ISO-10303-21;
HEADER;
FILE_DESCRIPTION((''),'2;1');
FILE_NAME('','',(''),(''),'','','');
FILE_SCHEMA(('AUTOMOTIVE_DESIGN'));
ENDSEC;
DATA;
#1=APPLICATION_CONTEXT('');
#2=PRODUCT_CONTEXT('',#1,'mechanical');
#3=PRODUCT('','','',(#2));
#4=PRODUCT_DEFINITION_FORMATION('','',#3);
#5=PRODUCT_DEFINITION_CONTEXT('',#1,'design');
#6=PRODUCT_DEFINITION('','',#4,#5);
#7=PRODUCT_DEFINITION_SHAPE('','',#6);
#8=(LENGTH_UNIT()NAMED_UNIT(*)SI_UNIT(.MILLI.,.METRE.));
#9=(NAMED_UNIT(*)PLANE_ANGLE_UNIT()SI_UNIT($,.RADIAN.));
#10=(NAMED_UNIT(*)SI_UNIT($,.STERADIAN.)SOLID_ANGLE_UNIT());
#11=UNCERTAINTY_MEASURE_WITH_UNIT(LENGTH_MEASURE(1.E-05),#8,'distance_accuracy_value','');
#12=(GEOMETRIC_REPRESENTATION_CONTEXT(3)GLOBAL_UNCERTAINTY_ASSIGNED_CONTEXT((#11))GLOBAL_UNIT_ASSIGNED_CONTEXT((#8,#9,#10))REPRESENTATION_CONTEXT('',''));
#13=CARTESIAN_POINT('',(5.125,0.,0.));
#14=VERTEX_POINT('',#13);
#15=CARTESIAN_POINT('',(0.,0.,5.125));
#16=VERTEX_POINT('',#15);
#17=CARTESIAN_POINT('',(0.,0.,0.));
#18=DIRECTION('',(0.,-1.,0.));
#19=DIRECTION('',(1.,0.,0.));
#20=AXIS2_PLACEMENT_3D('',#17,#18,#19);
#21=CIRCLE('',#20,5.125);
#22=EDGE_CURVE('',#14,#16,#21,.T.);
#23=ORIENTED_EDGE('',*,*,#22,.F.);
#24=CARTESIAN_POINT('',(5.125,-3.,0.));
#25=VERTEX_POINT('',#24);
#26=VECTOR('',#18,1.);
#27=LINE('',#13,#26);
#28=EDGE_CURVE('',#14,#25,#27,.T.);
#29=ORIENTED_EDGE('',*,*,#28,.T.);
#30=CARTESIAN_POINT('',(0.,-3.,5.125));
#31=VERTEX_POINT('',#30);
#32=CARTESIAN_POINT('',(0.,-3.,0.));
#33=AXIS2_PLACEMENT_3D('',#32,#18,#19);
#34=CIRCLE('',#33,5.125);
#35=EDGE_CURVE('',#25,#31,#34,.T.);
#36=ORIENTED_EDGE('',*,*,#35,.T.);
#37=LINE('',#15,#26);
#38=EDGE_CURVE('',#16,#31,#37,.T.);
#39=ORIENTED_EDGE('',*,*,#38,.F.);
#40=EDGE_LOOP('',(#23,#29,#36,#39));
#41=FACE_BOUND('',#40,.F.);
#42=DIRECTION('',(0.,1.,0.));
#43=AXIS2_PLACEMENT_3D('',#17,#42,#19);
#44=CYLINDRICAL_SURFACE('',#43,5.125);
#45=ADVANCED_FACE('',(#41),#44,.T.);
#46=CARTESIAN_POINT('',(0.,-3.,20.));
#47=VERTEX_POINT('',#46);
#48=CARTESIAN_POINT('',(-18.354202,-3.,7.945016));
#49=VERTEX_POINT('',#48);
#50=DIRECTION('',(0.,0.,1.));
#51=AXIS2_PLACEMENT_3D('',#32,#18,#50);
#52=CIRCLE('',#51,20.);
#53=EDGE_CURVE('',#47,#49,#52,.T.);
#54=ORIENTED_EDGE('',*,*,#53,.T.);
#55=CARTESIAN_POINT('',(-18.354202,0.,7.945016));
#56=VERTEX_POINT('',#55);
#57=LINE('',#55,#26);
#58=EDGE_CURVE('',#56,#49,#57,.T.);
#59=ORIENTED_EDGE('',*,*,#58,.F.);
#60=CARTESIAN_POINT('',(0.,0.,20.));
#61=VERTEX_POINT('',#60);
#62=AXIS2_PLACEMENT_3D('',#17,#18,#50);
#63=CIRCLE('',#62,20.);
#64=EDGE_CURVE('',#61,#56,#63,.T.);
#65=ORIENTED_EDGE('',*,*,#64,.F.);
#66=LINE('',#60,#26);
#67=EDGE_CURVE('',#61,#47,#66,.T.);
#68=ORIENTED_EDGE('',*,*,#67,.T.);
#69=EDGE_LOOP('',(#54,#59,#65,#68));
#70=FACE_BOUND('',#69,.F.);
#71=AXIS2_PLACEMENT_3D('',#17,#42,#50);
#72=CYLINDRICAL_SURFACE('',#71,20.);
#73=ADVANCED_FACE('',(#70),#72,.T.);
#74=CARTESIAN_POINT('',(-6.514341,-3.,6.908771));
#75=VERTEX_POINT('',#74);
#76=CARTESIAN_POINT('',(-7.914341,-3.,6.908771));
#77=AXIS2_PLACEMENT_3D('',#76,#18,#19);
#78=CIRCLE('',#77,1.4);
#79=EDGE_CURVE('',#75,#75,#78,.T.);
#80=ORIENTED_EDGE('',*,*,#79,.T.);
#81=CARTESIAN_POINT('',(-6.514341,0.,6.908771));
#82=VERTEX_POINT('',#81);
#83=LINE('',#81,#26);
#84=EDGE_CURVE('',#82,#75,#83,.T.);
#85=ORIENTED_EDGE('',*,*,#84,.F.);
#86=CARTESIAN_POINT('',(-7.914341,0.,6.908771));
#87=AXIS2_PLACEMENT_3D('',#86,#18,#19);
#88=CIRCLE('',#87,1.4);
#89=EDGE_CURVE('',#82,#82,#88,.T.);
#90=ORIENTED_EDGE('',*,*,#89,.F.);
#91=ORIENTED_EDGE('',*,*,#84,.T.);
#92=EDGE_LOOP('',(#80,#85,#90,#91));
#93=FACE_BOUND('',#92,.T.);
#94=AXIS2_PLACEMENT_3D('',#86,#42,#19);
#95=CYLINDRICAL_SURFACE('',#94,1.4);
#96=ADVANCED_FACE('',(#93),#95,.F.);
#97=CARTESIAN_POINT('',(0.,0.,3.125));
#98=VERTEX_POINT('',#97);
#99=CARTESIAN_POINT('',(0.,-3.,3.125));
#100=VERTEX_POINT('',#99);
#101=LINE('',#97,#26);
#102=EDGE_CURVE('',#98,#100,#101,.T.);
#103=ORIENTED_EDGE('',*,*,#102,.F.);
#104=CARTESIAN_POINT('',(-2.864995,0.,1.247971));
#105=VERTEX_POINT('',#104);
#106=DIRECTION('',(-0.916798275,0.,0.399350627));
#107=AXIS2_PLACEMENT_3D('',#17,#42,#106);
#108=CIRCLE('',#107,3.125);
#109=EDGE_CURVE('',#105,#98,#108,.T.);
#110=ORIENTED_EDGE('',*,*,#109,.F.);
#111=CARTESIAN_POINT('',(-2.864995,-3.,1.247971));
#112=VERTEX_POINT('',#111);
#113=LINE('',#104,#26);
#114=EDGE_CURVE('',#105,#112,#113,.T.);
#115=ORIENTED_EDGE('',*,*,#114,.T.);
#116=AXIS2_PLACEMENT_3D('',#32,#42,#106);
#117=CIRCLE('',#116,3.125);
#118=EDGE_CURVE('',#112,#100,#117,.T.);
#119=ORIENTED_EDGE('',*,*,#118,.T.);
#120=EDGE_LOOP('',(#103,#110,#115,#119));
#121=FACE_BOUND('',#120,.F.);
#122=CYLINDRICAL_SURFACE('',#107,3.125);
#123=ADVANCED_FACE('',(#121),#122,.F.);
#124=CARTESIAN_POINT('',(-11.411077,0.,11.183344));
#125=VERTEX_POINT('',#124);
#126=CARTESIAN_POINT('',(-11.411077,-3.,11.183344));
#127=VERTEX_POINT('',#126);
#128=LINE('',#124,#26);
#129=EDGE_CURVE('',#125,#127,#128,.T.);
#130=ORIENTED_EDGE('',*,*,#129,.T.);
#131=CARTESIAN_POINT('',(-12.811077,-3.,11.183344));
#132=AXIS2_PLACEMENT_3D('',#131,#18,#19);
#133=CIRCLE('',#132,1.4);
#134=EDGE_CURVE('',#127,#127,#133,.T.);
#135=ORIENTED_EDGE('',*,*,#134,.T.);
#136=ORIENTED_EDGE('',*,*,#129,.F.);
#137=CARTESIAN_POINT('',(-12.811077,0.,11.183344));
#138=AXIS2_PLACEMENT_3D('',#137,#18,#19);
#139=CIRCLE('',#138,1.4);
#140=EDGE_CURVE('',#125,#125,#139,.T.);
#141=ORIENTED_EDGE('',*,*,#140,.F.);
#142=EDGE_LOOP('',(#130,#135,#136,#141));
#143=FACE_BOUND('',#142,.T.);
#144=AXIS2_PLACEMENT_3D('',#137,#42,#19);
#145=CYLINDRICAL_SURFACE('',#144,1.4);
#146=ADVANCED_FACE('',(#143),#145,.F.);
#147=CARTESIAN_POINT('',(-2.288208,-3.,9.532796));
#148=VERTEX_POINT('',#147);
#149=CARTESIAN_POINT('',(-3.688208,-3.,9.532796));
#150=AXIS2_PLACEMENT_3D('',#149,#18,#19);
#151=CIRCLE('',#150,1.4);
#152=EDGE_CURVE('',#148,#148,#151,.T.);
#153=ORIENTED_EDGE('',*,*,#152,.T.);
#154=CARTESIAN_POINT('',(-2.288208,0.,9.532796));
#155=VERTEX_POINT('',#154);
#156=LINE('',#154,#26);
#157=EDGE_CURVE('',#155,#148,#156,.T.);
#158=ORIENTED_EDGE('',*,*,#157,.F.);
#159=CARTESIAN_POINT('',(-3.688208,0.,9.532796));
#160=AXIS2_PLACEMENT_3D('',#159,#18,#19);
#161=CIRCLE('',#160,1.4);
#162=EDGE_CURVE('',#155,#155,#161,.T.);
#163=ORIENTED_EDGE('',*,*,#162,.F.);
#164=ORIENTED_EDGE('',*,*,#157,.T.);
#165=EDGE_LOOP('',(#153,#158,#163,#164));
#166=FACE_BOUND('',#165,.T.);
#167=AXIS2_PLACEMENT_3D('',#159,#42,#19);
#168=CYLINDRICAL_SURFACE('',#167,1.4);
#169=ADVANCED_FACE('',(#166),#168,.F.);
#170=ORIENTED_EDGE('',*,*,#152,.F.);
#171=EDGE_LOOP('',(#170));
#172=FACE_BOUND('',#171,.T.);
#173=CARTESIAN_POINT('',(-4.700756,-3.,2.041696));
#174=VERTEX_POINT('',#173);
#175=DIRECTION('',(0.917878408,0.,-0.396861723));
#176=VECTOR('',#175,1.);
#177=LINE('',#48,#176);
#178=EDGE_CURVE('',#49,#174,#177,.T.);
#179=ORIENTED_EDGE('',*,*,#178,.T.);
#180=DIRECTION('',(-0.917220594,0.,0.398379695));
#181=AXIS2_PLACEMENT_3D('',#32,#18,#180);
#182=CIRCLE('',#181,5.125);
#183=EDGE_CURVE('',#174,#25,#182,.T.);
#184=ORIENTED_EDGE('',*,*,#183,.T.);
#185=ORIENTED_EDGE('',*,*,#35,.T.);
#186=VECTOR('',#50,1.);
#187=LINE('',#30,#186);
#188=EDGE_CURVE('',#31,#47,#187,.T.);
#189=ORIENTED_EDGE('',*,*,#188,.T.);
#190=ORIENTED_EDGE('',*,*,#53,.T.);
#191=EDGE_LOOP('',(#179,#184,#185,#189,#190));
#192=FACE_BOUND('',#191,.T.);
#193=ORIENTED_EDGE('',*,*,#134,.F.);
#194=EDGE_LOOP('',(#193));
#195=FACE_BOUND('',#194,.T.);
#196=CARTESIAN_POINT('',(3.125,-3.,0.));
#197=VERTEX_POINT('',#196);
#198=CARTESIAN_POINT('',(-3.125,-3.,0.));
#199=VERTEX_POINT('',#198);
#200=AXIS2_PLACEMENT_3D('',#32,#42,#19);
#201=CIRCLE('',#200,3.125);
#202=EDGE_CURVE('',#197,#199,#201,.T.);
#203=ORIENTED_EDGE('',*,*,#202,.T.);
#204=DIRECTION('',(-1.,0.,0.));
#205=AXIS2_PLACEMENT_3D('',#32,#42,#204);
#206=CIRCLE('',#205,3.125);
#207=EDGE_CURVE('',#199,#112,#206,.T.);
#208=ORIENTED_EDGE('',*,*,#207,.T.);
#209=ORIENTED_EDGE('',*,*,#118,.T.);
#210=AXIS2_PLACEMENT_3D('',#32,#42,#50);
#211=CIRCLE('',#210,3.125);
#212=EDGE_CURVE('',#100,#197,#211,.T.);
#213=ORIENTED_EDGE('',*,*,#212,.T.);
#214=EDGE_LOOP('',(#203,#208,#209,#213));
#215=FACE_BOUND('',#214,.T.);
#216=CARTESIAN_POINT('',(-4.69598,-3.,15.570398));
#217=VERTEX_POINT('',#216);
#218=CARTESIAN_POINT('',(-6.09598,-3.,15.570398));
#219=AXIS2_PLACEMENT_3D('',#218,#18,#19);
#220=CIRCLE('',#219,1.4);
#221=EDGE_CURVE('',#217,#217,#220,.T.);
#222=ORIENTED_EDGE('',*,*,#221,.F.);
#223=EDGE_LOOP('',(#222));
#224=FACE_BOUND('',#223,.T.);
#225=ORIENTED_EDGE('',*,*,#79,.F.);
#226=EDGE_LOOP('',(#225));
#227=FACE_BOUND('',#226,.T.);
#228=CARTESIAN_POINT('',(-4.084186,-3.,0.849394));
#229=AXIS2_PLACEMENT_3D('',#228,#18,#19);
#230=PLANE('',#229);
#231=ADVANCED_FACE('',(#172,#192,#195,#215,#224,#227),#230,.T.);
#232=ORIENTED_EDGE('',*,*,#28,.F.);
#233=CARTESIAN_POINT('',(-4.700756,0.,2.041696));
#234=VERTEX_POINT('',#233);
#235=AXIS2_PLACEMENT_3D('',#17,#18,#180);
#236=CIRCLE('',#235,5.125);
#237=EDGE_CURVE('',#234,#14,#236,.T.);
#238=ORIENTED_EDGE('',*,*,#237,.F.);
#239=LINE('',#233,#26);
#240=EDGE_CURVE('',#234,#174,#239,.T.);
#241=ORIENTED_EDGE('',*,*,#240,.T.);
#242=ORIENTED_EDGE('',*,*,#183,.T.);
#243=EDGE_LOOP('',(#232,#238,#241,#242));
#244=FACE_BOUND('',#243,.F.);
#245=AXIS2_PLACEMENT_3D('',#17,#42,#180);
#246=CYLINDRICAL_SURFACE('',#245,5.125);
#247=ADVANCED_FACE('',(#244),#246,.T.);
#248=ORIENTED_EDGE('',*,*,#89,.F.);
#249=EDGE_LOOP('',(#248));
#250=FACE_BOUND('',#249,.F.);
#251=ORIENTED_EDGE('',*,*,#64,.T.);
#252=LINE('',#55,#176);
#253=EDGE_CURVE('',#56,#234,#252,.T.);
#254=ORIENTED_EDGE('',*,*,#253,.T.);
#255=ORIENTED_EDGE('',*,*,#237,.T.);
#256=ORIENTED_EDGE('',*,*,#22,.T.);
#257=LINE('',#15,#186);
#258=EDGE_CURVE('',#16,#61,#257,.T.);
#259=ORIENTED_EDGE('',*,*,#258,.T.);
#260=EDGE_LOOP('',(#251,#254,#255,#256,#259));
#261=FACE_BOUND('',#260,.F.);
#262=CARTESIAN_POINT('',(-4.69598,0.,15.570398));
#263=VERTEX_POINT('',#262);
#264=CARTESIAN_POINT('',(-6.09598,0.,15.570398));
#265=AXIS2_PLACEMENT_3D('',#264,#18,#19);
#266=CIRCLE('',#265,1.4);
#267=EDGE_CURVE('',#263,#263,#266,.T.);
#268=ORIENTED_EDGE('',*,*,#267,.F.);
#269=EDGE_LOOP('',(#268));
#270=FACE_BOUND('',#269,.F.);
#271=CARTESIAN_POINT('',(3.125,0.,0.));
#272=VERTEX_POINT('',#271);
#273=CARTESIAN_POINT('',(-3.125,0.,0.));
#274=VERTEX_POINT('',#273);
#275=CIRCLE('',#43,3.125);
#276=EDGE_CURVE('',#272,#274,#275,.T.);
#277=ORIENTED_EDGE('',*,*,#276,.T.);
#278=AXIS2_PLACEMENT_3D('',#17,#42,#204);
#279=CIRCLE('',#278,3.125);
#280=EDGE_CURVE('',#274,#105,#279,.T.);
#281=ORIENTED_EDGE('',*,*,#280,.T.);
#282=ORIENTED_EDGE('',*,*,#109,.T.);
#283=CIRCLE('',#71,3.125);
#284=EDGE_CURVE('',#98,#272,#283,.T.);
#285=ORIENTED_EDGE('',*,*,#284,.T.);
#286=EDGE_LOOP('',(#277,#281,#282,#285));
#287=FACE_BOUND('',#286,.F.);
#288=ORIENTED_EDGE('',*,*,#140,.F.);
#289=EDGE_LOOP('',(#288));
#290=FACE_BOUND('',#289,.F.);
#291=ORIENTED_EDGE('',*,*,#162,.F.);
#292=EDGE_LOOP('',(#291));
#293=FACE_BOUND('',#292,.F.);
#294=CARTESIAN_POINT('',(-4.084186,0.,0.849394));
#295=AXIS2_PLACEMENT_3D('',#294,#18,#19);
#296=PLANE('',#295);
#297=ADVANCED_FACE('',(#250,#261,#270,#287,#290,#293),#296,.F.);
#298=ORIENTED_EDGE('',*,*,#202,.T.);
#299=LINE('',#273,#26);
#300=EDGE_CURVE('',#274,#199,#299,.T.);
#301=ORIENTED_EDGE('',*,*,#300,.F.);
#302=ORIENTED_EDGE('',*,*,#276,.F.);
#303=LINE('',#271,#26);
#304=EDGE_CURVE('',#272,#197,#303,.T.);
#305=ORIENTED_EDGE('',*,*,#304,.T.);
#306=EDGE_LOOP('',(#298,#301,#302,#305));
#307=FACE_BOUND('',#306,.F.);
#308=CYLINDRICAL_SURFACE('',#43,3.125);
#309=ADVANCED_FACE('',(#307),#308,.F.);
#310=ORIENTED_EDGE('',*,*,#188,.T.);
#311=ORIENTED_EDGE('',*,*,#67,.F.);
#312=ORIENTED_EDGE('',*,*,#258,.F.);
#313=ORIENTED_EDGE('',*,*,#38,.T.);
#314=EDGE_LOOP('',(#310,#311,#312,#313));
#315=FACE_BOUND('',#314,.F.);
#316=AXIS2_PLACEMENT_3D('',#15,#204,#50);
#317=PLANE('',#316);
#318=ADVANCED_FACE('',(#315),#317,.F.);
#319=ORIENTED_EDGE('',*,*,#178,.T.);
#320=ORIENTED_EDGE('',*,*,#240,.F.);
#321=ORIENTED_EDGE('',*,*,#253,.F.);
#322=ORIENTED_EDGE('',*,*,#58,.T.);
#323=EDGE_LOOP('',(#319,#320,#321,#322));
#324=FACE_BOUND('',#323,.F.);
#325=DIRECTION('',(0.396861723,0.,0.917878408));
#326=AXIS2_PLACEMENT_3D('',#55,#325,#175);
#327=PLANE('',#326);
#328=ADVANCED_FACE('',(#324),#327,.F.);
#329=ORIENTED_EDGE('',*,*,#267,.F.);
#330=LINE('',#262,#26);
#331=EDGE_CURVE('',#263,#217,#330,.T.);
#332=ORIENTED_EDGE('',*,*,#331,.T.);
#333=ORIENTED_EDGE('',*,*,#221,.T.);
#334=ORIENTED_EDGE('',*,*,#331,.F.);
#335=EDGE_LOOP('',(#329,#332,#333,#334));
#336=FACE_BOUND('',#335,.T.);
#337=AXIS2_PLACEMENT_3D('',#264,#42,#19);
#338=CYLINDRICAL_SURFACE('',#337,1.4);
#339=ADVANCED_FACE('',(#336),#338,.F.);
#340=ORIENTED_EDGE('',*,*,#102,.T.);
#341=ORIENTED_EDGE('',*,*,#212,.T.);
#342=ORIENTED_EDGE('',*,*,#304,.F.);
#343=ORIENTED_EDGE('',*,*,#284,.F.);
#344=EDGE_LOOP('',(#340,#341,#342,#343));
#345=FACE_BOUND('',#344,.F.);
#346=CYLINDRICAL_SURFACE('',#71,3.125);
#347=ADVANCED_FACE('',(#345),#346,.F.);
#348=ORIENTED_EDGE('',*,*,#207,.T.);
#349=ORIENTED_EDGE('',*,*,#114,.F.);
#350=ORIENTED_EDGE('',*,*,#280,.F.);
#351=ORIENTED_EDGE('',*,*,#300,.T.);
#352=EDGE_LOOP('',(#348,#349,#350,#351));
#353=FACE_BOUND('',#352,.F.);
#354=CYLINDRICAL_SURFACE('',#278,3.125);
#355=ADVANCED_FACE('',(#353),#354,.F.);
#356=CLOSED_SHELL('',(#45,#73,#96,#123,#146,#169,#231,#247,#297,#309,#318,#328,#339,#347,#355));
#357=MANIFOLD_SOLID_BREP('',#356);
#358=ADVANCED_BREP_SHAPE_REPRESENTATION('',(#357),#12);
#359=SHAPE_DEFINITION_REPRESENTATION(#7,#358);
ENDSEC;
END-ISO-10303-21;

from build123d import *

# Parameters (mm, degrees)
F0_R     = 1.4
F1_DEPTH = 3


# Not quite as in the source:
# - a feature names something its author has since deleted; it is built from what else it names


with BuildPart() as f1:
    # F0 (on Front) → F1 (new body)
    with BuildSketch(Plane.XZ):
        with BuildLine():
            Line((-5.125, 0), (-3.125, 0))
            ThreePointArc((-3.125, 0), (-3.0593081858, 0.6373840479), (-2.8649946083, 1.2479707105))
            Line((-2.8649946083, 1.2479707105), (-4.700755545, 2.0416959387))
            ThreePointArc((-4.700755545, 2.0416959387), (-5.0178181099, 1.0426535455), (-5.125, 0))
        make_face()
        with BuildLine():
            ThreePointArc((3.125, 0), (0, -3.125), (-3.125, 0))
            Line((-3.125, 0), (-5.125, 0))
            ThreePointArc((-5.125, 0), (0, -5.125), (5.125, 0))
            ThreePointArc((5.125, 0), (3.6239222536, 3.6239222536), (0, 5.125))
            Line((0, 5.125), (0, 3.125))
            ThreePointArc((0, 3.125), (2.2097086912, 2.2097086912), (3.125, 0))
        make_face()
        with BuildLine():
            Line((-4.700755545, 2.0416959387), (-2.8649946083, 1.2479707105))
            ThreePointArc((-2.8649946083, 1.2479707105), (-1.7125589814, 2.6139561464), (0, 3.125))
            Line((0, 3.125), (0, 5.125))
            ThreePointArc((0, 5.125), (-2.8108658198, 4.2854006047), (-4.700755545, 2.0416959387))
        make_face()
        with BuildLine():
            Line((-18.3542016569, 7.9450161447), (-4.700755545, 2.0416959387))
            ThreePointArc((-4.700755545, 2.0416959387), (-2.8108658198, 4.2854006047), (0, 5.125))
            Line((0, 5.125), (0, 20))
            ThreePointArc((0, 20), (-10.9795190493, 16.7167628878), (-18.3542016569, 7.9450161447))
        make_face()
        with Locations((-7.9143406, 6.9087709696)):
            Circle(F0_R, mode=Mode.SUBTRACT)
        with Locations((-3.6882084925, 9.5327961412)):
            Circle(F0_R, mode=Mode.SUBTRACT)
        with Locations((-12.8110766731, 11.1833441447)):
            Circle(F0_R, mode=Mode.SUBTRACT)
        with Locations((-6.0959799545, 15.5703980315)):
            Circle(F0_R, mode=Mode.SUBTRACT)
    extrude(amount=F1_DEPTH)


solid = f1.part
